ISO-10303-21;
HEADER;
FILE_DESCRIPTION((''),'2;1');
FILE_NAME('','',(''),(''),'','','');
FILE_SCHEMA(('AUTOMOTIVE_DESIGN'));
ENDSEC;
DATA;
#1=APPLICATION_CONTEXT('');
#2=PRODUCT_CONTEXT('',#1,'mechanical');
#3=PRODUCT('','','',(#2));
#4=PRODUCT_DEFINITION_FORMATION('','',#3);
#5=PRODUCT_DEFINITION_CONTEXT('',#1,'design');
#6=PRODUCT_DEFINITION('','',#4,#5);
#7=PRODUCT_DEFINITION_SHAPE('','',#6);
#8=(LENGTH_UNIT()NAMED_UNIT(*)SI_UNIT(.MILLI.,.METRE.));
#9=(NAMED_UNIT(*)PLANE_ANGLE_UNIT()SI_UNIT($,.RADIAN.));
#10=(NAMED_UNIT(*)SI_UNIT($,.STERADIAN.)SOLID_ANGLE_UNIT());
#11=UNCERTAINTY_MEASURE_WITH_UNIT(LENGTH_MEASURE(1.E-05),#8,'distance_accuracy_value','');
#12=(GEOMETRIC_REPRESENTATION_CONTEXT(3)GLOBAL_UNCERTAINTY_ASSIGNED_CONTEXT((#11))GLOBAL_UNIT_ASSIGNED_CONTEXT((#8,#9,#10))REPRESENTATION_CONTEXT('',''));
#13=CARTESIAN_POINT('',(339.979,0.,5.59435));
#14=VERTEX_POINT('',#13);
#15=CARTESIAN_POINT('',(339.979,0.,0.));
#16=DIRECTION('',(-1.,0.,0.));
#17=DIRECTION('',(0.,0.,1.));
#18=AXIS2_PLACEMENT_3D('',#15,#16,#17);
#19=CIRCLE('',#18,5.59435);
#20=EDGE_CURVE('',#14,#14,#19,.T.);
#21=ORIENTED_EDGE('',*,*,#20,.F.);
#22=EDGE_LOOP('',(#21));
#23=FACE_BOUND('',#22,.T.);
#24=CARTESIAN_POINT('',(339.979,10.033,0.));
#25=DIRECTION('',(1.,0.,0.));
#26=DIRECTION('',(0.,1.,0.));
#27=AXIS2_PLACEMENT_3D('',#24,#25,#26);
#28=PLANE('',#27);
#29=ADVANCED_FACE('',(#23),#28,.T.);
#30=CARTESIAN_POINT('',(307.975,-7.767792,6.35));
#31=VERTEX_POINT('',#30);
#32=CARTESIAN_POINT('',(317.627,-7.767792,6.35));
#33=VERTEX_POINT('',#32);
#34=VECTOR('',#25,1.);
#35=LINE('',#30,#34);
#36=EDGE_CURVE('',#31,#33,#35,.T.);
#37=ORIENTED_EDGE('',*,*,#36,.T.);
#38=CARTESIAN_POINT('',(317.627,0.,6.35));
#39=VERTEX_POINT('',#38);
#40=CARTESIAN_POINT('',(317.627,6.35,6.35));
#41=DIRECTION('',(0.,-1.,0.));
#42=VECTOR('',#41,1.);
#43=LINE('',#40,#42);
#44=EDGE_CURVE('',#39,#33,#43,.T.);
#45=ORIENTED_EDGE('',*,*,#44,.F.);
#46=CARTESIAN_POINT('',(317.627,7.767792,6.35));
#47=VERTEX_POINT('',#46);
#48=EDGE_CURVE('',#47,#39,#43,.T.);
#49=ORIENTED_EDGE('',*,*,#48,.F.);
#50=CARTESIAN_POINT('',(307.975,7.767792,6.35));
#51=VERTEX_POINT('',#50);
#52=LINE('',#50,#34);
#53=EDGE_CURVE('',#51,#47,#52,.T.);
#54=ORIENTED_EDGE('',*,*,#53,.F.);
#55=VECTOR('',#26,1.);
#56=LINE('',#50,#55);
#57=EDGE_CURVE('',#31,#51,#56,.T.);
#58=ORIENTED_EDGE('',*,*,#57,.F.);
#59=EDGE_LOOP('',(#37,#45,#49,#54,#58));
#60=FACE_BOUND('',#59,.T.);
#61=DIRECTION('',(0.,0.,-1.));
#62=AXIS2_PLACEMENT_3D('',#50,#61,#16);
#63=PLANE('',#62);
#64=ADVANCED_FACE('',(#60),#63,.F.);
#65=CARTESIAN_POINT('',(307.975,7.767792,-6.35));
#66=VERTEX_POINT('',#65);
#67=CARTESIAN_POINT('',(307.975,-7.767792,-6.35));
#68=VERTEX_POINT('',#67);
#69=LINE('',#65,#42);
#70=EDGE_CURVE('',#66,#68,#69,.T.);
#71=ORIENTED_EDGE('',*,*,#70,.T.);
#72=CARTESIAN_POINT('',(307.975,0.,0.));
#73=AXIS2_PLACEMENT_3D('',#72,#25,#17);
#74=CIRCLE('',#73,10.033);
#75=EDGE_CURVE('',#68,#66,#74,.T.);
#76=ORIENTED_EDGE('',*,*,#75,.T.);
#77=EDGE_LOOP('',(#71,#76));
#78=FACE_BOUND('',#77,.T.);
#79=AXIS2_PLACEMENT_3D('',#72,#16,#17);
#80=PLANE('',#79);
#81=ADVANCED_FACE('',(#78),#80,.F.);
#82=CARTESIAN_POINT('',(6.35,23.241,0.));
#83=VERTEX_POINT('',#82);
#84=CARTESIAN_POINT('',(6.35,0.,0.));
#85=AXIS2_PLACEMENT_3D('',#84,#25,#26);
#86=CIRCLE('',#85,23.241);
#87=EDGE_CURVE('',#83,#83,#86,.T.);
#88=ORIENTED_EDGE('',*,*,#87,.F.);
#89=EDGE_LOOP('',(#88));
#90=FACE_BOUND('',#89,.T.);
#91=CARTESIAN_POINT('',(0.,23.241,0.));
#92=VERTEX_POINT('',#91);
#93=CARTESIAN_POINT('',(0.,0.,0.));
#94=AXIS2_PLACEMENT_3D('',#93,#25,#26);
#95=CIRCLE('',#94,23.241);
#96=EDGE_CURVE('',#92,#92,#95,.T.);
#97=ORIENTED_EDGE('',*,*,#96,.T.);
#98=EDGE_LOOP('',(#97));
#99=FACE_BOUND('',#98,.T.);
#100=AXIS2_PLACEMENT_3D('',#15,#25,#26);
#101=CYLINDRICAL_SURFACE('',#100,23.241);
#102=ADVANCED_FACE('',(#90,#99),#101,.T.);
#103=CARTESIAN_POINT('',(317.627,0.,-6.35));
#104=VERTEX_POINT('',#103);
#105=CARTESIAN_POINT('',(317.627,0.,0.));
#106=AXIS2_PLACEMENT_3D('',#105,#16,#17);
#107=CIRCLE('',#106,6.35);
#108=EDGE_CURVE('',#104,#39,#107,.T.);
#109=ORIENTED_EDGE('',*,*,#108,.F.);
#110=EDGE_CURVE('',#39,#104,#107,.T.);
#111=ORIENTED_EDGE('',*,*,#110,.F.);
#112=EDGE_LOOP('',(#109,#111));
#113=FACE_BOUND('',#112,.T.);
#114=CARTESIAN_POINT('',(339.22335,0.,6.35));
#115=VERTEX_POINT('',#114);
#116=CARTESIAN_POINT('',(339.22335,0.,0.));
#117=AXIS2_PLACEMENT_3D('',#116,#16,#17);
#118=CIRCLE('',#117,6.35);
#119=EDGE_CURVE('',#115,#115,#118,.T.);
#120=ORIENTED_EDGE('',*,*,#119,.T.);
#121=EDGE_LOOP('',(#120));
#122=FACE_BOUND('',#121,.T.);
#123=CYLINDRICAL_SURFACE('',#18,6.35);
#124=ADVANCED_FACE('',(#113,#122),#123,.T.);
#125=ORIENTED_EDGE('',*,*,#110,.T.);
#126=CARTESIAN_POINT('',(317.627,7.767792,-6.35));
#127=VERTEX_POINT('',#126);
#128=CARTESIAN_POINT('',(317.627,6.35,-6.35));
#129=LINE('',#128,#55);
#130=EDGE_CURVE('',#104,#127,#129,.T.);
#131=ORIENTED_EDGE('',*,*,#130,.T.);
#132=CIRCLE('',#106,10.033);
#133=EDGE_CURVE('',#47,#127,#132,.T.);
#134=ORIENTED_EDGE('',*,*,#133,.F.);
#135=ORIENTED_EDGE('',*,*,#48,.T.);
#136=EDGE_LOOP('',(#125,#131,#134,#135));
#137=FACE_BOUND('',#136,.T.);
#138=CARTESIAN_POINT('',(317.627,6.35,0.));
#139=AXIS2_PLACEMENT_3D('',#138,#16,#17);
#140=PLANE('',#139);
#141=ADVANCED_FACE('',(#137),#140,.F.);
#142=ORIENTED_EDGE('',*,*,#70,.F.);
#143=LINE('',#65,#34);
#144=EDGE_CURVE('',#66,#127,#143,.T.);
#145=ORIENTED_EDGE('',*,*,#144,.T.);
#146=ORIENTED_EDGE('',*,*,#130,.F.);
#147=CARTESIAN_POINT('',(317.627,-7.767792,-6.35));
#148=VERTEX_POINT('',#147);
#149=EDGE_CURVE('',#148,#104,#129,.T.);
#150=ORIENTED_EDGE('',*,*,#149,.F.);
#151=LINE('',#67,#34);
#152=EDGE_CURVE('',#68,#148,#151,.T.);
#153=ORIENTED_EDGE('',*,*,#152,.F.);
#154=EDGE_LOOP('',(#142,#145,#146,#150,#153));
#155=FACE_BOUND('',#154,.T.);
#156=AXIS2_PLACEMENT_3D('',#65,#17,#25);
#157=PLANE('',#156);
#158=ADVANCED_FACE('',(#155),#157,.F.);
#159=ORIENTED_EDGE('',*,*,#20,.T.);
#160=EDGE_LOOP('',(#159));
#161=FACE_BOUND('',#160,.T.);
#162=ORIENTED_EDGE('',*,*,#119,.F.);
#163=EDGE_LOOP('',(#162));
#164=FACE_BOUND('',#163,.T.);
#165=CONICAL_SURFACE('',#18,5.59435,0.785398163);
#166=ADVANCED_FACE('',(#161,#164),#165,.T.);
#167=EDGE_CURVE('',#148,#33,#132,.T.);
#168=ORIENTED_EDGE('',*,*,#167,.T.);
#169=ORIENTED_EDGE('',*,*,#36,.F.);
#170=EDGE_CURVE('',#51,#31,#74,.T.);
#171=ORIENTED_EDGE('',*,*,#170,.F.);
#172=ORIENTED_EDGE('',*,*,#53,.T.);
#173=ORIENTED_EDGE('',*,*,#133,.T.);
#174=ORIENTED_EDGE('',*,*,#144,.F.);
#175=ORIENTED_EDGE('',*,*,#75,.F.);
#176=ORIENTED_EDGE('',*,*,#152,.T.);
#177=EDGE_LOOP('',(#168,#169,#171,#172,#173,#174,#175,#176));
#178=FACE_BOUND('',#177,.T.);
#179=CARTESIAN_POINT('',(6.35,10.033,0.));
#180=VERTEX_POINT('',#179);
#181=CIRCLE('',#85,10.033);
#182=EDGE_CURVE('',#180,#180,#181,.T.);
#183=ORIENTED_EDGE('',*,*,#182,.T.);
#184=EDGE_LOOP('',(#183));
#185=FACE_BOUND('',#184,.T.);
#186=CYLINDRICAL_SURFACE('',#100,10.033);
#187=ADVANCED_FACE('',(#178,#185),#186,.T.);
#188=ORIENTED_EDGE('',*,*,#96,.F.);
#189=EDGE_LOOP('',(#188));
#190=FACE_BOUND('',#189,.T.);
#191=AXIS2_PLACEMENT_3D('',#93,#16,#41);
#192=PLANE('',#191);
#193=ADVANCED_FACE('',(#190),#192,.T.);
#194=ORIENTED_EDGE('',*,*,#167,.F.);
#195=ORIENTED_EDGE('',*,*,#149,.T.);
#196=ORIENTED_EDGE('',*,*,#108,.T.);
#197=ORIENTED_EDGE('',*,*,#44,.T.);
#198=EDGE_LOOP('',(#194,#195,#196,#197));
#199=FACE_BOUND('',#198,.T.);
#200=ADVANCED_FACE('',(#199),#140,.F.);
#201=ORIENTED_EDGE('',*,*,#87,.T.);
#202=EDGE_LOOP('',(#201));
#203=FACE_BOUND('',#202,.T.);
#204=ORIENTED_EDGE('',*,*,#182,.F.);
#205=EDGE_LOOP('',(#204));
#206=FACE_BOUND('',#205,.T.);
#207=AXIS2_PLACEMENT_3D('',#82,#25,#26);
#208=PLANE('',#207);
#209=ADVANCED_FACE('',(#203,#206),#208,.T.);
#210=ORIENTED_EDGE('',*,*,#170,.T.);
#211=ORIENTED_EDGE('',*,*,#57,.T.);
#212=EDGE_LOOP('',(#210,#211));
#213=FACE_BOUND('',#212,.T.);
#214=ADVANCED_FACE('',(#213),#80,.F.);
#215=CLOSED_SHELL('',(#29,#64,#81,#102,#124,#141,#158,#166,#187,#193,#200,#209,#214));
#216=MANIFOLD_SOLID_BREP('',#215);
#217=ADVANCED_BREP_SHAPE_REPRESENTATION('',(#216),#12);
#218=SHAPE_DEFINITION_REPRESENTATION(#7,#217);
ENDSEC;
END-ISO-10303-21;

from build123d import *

# Parameters (mm, degrees)
CUT_EXTRUDE1_DEPTH = 32.004


# Read off the part's stored shape, not the designer's step: 1/2-20 Machine Threads Stud1
with BuildPart() as part:
    # Sketch2 → Revolve1 (revolve)
    with BuildSketch(Plane.XY):
        Polygon((0, 0), (0, 23.241), (6.35, 23.241), (6.35, 10.033), (339.979, 10.033), (339.979, 0), align=None)
    revolve(axis=Axis((339.979, 0, 0), (-1, 0, 0)))

    # 1/2-20 Machine Threads Stud1 outline → 1/2-20 Machine Threads Stud1 (revolve, cut)
    with BuildSketch(Plane.YX):
        Polygon((10.033, 339.979), (5.59435, 339.979), (6.35, 339.22335), (6.35, 317.627), (10.033, 317.627), align=None)
    revolve(axis=Axis((0, 0, 0), (1, 0, 0)), mode=Mode.SUBTRACT)

    # Sketch7 → Cut-Extrude1 (cut)
    with BuildSketch(Plane(origin=(339.979, 0, 0), x_dir=(0, 0, -1), z_dir=(1, 0, 0))):
        with BuildLine():
            Line((-6.35, 7.767791771), (-6.35, -7.767791771))
            ThreePointArc((-6.35, -7.767791771), (-10.033, 0), (-6.35, 7.767791771))
        make_face()
        with BuildLine():
            Line((6.35, 7.767791771), (6.35, -7.767791771))
            ThreePointArc((6.35, -7.767791771), (10.033, 0), (6.35, 7.767791771))
        make_face()
    extrude(amount=-CUT_EXTRUDE1_DEPTH, mode=Mode.SUBTRACT)


solid = part.part
